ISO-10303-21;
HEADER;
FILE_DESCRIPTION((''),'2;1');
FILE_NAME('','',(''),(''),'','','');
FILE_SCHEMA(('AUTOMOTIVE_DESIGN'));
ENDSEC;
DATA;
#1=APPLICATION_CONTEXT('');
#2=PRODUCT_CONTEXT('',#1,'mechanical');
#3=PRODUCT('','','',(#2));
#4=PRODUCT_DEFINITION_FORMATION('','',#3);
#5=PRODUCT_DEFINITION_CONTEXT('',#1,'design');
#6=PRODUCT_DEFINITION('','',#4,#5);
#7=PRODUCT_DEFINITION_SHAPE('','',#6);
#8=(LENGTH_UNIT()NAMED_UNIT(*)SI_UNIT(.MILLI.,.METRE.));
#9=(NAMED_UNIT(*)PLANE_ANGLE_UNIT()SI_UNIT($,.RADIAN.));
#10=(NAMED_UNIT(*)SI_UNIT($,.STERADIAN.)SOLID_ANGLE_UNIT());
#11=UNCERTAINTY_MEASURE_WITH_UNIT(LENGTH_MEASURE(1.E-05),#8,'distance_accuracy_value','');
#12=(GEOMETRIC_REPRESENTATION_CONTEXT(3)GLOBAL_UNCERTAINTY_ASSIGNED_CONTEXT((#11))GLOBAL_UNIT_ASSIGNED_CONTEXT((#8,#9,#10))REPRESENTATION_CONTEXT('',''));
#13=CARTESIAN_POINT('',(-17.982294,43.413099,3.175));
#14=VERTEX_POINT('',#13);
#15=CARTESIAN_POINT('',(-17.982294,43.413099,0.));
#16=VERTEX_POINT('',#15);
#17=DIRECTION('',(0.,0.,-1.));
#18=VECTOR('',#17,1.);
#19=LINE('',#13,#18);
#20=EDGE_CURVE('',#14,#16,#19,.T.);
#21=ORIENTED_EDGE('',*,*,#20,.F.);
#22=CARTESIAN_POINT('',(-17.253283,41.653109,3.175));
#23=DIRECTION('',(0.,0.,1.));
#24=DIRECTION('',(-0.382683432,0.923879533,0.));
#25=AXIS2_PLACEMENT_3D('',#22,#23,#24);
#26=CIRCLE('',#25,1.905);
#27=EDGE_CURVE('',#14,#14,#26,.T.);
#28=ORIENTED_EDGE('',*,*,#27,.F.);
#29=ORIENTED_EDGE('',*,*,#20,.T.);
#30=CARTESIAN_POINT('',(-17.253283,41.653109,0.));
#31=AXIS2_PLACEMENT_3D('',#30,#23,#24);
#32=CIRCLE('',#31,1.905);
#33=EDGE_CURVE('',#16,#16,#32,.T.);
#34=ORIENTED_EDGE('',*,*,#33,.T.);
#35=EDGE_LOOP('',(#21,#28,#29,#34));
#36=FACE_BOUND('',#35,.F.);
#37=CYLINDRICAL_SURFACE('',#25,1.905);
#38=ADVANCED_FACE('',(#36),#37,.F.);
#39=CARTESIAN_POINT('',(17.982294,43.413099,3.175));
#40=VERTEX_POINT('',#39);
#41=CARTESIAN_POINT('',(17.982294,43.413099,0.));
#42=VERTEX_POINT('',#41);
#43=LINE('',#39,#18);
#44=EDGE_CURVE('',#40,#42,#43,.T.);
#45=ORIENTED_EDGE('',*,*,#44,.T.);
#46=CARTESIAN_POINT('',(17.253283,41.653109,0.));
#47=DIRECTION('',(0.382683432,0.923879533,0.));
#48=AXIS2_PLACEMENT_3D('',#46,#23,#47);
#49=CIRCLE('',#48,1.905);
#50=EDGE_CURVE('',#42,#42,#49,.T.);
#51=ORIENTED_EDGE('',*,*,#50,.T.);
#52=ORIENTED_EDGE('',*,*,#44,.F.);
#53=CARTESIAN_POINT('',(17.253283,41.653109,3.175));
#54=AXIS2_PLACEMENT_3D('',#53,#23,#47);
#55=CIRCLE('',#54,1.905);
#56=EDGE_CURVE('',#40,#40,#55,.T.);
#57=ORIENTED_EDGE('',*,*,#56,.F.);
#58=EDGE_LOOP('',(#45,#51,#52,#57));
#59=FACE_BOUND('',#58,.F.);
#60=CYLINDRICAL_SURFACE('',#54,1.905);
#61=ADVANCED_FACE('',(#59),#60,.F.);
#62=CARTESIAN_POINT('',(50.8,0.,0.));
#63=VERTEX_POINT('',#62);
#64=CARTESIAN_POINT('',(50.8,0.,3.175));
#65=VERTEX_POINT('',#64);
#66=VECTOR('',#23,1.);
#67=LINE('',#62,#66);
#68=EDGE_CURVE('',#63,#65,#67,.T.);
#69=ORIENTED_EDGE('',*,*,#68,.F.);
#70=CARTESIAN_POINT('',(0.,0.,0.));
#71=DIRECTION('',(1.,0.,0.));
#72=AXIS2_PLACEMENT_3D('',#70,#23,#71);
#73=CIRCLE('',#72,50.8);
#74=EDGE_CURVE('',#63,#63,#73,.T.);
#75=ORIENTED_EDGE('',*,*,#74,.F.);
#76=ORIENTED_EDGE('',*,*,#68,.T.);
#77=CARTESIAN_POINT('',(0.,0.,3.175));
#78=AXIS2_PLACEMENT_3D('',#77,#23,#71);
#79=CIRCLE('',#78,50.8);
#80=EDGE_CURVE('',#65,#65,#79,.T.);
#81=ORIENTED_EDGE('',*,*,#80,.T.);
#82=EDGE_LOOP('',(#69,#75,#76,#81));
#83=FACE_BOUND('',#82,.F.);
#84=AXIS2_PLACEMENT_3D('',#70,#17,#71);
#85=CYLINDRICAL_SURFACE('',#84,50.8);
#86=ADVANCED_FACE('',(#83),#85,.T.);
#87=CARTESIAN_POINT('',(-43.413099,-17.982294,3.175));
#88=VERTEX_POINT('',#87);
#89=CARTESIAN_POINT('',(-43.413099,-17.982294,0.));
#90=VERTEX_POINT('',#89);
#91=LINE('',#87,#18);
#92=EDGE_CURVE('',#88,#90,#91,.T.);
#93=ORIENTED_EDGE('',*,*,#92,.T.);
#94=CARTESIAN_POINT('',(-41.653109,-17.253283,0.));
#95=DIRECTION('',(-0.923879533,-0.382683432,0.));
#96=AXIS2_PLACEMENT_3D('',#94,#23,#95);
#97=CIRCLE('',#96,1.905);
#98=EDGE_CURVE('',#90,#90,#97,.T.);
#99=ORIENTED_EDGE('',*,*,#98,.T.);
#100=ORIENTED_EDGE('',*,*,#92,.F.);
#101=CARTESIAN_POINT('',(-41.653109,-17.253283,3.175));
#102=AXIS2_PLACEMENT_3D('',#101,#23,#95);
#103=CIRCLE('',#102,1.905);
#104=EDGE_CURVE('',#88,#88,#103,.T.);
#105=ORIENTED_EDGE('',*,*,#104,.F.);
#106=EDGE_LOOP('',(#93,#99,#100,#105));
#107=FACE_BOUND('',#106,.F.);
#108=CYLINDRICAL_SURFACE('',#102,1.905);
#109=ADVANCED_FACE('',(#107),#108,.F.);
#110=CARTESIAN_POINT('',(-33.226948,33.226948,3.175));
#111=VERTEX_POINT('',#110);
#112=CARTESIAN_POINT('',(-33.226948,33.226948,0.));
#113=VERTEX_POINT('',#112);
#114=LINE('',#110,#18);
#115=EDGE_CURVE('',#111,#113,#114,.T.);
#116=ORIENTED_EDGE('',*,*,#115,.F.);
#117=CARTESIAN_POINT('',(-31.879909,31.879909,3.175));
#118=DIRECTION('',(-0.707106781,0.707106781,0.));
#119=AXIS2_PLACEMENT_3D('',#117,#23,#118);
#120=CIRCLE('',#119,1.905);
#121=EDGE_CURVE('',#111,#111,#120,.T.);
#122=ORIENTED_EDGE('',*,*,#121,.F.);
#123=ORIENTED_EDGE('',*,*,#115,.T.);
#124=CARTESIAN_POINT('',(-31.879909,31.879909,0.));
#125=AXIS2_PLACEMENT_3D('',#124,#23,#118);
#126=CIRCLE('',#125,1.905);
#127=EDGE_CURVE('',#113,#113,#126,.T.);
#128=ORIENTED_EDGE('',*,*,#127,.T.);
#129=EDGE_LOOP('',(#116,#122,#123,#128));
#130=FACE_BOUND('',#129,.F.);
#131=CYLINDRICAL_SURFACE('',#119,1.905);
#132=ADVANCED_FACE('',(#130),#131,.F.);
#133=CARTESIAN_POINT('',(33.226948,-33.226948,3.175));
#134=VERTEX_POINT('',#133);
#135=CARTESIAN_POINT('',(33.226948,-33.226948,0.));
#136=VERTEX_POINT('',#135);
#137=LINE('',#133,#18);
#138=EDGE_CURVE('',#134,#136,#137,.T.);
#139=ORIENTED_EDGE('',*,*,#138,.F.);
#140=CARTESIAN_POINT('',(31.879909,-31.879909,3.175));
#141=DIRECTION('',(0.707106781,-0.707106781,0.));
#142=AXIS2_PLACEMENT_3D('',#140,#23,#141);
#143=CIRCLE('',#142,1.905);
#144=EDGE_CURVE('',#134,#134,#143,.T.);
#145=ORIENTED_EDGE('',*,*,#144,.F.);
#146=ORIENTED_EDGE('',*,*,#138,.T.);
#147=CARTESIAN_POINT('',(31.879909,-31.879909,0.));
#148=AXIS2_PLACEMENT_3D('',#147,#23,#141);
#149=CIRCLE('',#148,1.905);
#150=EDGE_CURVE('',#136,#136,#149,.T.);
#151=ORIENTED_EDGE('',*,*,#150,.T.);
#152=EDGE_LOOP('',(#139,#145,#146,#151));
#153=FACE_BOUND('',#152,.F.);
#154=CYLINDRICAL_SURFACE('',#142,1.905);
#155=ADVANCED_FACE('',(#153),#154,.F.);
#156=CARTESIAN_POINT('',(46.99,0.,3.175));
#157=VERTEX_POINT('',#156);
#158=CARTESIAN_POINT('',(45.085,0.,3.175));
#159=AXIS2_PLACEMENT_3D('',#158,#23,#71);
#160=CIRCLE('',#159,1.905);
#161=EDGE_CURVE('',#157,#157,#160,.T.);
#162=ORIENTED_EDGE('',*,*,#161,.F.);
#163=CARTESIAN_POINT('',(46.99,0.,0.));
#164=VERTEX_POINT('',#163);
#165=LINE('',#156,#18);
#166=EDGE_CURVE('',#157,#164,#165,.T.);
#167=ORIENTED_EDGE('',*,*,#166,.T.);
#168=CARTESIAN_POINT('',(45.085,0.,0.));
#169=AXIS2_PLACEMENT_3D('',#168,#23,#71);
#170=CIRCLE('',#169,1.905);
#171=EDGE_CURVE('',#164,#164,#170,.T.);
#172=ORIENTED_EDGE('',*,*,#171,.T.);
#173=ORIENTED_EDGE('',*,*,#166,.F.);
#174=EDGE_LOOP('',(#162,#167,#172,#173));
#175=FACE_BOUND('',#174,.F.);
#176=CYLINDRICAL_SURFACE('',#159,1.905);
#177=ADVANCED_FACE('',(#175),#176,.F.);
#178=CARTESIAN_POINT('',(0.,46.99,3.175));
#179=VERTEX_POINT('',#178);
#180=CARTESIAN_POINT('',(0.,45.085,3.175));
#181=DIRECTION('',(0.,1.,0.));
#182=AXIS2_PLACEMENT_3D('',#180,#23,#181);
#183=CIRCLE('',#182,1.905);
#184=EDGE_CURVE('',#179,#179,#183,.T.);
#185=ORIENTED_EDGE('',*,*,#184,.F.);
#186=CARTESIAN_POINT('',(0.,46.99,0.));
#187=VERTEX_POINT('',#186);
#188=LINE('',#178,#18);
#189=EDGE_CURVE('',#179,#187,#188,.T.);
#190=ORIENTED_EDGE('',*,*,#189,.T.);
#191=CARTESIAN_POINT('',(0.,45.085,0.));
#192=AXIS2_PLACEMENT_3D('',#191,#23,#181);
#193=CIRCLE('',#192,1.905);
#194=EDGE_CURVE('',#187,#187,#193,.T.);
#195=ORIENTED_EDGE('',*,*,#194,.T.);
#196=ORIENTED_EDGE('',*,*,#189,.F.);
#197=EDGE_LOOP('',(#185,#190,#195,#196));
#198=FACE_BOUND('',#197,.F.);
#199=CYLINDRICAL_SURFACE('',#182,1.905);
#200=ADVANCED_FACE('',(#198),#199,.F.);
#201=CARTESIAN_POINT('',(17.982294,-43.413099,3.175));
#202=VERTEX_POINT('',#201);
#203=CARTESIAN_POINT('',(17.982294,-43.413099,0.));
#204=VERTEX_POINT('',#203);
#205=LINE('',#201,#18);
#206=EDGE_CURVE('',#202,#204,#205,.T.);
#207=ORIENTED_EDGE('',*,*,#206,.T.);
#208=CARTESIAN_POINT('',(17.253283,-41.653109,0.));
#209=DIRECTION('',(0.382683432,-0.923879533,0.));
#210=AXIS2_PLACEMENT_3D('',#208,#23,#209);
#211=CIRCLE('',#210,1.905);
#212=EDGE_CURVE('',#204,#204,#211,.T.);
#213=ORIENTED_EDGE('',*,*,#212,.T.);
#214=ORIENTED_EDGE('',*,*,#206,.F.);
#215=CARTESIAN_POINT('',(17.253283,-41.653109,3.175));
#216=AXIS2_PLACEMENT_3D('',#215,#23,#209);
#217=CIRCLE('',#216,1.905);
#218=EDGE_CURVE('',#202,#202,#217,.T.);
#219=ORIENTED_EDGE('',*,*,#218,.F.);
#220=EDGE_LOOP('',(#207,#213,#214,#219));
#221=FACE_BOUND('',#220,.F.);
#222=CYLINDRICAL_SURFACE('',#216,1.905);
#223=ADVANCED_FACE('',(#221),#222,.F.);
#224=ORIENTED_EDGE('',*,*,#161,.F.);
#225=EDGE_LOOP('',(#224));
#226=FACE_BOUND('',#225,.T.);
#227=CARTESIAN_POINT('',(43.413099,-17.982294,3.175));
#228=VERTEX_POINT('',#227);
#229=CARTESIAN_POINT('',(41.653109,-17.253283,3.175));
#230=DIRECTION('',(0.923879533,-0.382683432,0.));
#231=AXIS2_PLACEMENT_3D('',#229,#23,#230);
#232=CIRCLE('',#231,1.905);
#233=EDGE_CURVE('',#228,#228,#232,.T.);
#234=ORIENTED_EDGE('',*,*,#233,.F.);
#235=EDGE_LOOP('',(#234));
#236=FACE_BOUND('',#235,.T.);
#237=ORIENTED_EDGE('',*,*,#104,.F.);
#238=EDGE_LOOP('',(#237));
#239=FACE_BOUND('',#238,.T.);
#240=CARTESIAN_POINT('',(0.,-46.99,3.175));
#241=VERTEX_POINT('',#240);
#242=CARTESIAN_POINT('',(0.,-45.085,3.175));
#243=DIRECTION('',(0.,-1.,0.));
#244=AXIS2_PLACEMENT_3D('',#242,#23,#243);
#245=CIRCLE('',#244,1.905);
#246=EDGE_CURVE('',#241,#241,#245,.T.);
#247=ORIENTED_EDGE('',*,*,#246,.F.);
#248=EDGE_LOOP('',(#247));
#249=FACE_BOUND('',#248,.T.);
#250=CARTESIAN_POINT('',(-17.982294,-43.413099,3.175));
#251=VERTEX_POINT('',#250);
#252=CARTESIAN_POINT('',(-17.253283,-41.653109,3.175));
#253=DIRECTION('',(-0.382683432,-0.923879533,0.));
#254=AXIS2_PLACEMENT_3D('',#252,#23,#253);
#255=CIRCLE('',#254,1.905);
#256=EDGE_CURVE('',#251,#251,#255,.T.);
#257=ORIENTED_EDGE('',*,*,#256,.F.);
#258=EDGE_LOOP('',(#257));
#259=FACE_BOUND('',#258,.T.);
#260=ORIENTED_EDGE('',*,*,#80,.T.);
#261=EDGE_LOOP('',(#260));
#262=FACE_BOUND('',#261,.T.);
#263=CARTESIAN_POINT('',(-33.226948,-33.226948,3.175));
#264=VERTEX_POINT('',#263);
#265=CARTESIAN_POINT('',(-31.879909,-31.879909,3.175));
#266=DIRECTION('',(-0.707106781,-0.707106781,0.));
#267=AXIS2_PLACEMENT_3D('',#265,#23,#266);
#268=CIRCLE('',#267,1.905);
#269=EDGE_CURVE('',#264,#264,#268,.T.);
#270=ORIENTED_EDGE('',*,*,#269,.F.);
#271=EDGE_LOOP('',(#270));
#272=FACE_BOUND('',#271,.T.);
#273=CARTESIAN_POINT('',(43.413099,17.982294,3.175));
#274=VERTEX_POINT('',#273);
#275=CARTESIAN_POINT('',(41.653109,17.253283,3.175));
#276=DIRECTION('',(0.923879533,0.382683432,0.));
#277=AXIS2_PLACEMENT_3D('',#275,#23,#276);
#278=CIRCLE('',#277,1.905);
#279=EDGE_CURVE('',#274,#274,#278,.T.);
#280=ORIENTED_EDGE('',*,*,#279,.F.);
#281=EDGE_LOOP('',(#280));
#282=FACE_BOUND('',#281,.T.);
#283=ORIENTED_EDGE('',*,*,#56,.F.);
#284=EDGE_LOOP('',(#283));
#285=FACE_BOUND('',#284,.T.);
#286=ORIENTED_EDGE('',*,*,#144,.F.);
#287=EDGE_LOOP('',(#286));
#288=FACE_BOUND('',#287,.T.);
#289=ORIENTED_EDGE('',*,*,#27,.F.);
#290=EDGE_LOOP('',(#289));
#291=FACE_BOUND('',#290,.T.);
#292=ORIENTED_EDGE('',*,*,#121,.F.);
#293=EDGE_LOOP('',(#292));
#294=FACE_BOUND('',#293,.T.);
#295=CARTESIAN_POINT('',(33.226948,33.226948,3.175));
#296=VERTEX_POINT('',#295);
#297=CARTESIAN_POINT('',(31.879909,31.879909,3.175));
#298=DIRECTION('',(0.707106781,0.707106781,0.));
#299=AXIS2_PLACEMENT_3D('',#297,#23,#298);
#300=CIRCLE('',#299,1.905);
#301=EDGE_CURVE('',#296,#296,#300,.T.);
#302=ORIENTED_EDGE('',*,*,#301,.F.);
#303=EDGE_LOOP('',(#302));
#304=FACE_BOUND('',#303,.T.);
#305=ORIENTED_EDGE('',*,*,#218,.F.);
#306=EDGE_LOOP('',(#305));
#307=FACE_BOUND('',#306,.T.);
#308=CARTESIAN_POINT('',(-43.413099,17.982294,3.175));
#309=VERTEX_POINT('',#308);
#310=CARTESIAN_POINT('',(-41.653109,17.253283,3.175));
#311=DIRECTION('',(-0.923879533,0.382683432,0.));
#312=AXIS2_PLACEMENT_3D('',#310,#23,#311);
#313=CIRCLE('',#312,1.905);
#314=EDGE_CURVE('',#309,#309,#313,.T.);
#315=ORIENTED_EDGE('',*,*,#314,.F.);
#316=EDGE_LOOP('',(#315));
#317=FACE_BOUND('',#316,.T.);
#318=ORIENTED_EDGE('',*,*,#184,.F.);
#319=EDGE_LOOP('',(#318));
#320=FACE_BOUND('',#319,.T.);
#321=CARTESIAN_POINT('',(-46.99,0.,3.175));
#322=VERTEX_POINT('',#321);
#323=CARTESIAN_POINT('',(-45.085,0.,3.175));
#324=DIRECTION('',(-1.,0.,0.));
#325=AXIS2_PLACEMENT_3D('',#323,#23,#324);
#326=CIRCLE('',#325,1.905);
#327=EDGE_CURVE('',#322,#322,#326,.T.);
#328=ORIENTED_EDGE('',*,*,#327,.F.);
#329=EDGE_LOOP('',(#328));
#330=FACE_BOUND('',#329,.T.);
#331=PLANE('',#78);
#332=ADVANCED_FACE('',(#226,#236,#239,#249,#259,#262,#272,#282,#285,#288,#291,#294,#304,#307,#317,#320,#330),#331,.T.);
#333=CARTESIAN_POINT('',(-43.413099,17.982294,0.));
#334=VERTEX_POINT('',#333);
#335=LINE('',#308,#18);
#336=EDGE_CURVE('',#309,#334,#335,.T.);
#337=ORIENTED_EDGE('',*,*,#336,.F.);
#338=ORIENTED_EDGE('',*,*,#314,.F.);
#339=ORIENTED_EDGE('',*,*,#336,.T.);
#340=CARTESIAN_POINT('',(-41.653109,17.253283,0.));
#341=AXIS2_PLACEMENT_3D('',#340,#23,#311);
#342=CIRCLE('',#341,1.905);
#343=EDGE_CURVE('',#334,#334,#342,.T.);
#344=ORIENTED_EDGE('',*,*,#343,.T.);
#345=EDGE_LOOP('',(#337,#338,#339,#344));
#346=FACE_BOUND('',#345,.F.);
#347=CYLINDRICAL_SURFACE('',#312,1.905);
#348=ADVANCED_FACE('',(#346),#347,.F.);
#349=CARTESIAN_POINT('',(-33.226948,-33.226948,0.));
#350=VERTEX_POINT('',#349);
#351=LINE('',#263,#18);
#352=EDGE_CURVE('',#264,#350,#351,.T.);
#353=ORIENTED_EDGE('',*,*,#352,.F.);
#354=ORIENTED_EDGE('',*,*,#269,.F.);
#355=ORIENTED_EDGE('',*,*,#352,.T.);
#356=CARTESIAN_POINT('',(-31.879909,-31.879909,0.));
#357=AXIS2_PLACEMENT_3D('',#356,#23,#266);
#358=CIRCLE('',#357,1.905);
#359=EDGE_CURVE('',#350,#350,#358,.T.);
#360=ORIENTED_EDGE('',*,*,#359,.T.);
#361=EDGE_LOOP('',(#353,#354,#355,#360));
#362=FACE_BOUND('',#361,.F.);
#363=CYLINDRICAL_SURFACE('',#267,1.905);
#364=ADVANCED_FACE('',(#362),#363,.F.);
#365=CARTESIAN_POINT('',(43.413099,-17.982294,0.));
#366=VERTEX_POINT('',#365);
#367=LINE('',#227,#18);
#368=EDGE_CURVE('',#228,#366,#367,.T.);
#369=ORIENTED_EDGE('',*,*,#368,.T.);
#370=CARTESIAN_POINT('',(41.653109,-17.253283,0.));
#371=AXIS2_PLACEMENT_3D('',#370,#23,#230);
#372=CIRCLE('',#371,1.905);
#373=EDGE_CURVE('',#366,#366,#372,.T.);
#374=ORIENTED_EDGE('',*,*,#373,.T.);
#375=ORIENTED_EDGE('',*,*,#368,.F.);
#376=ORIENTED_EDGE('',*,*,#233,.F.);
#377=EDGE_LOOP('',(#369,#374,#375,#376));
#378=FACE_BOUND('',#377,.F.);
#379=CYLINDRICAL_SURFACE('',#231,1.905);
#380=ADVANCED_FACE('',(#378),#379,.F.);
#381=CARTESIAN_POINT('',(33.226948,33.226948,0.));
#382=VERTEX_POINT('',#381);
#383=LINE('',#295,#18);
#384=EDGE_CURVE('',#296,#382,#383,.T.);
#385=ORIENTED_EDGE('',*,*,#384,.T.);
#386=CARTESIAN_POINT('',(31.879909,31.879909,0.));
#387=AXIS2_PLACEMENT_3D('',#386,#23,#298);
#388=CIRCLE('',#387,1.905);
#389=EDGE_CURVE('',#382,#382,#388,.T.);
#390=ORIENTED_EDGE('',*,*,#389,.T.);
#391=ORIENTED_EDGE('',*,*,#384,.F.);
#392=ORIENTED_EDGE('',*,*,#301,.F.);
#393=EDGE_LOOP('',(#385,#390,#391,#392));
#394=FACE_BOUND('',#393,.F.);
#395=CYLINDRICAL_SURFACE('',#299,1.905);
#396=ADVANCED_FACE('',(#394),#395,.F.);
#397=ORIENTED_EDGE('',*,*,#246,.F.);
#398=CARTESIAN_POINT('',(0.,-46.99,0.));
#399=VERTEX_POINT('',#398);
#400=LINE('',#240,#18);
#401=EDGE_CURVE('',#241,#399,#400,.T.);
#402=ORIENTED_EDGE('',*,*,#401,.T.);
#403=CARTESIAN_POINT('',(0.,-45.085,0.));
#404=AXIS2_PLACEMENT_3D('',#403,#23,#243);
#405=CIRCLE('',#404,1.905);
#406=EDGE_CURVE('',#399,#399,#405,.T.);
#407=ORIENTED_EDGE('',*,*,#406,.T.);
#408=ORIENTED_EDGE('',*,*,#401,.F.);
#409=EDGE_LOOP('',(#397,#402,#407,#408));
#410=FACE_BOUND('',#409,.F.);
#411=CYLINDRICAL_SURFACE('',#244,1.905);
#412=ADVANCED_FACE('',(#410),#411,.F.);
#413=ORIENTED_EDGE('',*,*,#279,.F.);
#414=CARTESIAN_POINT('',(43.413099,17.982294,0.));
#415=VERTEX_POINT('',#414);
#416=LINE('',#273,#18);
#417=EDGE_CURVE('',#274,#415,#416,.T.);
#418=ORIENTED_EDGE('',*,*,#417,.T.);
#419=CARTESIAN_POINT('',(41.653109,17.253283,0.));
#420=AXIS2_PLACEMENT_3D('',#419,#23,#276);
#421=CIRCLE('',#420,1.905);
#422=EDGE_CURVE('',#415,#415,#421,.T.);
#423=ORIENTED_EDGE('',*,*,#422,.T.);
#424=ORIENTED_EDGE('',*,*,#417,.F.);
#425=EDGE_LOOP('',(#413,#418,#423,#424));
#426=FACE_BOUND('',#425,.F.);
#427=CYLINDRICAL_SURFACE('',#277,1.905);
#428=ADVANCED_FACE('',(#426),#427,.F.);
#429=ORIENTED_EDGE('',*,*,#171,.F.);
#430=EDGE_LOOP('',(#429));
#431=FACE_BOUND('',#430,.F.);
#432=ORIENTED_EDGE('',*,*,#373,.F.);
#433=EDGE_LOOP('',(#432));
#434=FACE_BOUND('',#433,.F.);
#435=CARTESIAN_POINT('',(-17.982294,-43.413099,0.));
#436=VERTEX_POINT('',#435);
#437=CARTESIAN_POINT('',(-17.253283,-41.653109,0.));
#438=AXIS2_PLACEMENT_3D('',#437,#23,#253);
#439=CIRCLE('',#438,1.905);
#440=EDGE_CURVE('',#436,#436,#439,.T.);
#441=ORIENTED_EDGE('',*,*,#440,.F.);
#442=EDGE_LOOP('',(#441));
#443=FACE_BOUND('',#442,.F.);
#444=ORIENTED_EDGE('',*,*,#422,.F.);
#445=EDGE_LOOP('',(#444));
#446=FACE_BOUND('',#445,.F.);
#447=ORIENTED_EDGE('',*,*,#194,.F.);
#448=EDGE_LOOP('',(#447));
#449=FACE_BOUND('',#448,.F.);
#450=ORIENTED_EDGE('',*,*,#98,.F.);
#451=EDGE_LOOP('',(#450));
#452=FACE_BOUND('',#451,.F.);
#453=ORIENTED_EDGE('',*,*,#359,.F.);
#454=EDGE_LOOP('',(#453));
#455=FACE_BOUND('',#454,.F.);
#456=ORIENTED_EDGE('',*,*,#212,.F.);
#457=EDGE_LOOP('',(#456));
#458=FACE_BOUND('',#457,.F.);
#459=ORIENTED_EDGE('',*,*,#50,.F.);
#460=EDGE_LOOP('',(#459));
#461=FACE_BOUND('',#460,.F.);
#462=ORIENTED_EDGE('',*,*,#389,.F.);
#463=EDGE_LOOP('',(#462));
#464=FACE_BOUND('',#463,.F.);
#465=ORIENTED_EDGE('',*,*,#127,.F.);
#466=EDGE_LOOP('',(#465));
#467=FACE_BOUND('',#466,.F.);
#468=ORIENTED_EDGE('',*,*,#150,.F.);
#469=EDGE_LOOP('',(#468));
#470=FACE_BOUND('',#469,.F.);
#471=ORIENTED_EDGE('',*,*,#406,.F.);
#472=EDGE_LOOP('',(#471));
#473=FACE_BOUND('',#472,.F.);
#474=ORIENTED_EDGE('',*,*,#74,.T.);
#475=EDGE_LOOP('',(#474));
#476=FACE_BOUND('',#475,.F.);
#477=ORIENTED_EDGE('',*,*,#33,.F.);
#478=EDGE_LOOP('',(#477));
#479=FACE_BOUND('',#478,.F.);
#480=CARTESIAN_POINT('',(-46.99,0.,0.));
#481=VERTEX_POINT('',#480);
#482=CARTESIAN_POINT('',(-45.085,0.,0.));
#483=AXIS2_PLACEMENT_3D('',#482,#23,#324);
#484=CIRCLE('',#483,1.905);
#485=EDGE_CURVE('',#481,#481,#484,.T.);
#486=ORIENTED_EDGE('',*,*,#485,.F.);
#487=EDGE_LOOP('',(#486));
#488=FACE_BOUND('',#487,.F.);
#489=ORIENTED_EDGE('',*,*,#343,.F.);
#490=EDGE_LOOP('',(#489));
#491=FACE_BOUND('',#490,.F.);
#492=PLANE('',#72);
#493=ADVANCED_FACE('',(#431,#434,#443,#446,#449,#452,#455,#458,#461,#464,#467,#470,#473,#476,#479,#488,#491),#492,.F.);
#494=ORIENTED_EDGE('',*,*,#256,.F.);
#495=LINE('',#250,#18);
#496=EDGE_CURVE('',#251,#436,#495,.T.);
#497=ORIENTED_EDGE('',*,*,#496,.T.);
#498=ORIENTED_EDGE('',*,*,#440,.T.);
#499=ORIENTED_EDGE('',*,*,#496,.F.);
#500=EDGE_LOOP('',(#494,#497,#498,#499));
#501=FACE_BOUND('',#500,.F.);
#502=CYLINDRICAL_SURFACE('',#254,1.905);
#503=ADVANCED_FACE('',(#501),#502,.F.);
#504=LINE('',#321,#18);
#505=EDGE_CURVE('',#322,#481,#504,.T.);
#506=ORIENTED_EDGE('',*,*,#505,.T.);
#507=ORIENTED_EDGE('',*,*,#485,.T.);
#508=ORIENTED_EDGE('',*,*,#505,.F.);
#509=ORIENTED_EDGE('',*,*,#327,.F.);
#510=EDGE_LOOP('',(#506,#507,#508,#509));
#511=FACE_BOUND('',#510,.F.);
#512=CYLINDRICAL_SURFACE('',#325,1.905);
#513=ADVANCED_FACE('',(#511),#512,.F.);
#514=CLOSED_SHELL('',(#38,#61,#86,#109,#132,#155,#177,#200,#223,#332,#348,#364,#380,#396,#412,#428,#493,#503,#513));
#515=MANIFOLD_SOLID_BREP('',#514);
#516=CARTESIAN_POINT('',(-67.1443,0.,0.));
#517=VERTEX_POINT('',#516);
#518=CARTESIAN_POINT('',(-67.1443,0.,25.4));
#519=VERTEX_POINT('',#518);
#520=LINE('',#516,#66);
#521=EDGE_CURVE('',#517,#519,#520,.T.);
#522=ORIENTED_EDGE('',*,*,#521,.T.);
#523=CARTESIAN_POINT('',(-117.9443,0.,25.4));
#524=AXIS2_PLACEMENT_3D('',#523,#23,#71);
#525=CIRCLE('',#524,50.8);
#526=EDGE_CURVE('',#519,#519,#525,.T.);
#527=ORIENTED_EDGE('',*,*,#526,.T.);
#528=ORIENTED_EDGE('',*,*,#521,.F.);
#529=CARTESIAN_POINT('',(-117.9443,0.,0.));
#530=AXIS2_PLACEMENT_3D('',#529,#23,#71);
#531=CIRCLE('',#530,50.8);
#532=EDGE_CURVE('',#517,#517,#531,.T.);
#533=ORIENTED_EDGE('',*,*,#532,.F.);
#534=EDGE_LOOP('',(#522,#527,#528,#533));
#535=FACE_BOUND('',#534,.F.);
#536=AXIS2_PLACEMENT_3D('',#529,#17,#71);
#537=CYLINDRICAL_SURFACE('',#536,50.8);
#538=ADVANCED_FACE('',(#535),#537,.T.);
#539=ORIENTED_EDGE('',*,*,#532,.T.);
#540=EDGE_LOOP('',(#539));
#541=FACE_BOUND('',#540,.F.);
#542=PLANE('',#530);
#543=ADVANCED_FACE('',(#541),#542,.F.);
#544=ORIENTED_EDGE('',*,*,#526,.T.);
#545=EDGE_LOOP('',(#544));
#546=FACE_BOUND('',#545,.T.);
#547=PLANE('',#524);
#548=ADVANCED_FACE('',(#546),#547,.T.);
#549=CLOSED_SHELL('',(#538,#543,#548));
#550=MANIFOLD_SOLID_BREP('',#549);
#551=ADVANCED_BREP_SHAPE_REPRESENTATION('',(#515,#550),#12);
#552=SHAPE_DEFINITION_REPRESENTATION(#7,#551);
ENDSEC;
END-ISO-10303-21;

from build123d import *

# Parameters (mm, degrees)
F0_R            = 50.8
F1_DEPTH        = 3.175
F2_R            = 1.905
F3_DEPTH        = 25.4
F3_COPIES_COUNT = 16
F4_R            = 50.8
F5_DEPTH        = 25.4


# Not quite as in the source:
# - a pattern or mirror of a feature is missing from the dataset's text; its kind, count and spacing are read off the source's solid


with BuildPart() as f1:
    # F0 (on Top) → F1 (new body)
    with BuildSketch(Plane.XY):
        Circle(F0_R)
    extrude(amount=F1_DEPTH)

    # F2 (on face) → F3 (cut)
    with BuildSketch(Plane.XY.offset(3.175)):
        with Locations((45.085, 0)):
            Circle(F2_R)
    f3 = extrude(amount=-F3_DEPTH, mode=Mode.SUBTRACT)

    # F3_copies: F3 ×16 about axis
    f3_copies_axis = Axis((0, 0, 0), (0, 0, 1))
    for i in range(1, F3_COPIES_COUNT):
        add(f3.rotate(f3_copies_axis, i * 360 / F3_COPIES_COUNT), mode=Mode.SUBTRACT)


with BuildPart() as f5:
    # F4 (on Top) → F5 (new body)
    with BuildSketch(Plane.XY):
        with Locations((-117.9443001747, 0)):
            Circle(F4_R)
    extrude(amount=F5_DEPTH)


solid = Compound([f1.part, f5.part])
